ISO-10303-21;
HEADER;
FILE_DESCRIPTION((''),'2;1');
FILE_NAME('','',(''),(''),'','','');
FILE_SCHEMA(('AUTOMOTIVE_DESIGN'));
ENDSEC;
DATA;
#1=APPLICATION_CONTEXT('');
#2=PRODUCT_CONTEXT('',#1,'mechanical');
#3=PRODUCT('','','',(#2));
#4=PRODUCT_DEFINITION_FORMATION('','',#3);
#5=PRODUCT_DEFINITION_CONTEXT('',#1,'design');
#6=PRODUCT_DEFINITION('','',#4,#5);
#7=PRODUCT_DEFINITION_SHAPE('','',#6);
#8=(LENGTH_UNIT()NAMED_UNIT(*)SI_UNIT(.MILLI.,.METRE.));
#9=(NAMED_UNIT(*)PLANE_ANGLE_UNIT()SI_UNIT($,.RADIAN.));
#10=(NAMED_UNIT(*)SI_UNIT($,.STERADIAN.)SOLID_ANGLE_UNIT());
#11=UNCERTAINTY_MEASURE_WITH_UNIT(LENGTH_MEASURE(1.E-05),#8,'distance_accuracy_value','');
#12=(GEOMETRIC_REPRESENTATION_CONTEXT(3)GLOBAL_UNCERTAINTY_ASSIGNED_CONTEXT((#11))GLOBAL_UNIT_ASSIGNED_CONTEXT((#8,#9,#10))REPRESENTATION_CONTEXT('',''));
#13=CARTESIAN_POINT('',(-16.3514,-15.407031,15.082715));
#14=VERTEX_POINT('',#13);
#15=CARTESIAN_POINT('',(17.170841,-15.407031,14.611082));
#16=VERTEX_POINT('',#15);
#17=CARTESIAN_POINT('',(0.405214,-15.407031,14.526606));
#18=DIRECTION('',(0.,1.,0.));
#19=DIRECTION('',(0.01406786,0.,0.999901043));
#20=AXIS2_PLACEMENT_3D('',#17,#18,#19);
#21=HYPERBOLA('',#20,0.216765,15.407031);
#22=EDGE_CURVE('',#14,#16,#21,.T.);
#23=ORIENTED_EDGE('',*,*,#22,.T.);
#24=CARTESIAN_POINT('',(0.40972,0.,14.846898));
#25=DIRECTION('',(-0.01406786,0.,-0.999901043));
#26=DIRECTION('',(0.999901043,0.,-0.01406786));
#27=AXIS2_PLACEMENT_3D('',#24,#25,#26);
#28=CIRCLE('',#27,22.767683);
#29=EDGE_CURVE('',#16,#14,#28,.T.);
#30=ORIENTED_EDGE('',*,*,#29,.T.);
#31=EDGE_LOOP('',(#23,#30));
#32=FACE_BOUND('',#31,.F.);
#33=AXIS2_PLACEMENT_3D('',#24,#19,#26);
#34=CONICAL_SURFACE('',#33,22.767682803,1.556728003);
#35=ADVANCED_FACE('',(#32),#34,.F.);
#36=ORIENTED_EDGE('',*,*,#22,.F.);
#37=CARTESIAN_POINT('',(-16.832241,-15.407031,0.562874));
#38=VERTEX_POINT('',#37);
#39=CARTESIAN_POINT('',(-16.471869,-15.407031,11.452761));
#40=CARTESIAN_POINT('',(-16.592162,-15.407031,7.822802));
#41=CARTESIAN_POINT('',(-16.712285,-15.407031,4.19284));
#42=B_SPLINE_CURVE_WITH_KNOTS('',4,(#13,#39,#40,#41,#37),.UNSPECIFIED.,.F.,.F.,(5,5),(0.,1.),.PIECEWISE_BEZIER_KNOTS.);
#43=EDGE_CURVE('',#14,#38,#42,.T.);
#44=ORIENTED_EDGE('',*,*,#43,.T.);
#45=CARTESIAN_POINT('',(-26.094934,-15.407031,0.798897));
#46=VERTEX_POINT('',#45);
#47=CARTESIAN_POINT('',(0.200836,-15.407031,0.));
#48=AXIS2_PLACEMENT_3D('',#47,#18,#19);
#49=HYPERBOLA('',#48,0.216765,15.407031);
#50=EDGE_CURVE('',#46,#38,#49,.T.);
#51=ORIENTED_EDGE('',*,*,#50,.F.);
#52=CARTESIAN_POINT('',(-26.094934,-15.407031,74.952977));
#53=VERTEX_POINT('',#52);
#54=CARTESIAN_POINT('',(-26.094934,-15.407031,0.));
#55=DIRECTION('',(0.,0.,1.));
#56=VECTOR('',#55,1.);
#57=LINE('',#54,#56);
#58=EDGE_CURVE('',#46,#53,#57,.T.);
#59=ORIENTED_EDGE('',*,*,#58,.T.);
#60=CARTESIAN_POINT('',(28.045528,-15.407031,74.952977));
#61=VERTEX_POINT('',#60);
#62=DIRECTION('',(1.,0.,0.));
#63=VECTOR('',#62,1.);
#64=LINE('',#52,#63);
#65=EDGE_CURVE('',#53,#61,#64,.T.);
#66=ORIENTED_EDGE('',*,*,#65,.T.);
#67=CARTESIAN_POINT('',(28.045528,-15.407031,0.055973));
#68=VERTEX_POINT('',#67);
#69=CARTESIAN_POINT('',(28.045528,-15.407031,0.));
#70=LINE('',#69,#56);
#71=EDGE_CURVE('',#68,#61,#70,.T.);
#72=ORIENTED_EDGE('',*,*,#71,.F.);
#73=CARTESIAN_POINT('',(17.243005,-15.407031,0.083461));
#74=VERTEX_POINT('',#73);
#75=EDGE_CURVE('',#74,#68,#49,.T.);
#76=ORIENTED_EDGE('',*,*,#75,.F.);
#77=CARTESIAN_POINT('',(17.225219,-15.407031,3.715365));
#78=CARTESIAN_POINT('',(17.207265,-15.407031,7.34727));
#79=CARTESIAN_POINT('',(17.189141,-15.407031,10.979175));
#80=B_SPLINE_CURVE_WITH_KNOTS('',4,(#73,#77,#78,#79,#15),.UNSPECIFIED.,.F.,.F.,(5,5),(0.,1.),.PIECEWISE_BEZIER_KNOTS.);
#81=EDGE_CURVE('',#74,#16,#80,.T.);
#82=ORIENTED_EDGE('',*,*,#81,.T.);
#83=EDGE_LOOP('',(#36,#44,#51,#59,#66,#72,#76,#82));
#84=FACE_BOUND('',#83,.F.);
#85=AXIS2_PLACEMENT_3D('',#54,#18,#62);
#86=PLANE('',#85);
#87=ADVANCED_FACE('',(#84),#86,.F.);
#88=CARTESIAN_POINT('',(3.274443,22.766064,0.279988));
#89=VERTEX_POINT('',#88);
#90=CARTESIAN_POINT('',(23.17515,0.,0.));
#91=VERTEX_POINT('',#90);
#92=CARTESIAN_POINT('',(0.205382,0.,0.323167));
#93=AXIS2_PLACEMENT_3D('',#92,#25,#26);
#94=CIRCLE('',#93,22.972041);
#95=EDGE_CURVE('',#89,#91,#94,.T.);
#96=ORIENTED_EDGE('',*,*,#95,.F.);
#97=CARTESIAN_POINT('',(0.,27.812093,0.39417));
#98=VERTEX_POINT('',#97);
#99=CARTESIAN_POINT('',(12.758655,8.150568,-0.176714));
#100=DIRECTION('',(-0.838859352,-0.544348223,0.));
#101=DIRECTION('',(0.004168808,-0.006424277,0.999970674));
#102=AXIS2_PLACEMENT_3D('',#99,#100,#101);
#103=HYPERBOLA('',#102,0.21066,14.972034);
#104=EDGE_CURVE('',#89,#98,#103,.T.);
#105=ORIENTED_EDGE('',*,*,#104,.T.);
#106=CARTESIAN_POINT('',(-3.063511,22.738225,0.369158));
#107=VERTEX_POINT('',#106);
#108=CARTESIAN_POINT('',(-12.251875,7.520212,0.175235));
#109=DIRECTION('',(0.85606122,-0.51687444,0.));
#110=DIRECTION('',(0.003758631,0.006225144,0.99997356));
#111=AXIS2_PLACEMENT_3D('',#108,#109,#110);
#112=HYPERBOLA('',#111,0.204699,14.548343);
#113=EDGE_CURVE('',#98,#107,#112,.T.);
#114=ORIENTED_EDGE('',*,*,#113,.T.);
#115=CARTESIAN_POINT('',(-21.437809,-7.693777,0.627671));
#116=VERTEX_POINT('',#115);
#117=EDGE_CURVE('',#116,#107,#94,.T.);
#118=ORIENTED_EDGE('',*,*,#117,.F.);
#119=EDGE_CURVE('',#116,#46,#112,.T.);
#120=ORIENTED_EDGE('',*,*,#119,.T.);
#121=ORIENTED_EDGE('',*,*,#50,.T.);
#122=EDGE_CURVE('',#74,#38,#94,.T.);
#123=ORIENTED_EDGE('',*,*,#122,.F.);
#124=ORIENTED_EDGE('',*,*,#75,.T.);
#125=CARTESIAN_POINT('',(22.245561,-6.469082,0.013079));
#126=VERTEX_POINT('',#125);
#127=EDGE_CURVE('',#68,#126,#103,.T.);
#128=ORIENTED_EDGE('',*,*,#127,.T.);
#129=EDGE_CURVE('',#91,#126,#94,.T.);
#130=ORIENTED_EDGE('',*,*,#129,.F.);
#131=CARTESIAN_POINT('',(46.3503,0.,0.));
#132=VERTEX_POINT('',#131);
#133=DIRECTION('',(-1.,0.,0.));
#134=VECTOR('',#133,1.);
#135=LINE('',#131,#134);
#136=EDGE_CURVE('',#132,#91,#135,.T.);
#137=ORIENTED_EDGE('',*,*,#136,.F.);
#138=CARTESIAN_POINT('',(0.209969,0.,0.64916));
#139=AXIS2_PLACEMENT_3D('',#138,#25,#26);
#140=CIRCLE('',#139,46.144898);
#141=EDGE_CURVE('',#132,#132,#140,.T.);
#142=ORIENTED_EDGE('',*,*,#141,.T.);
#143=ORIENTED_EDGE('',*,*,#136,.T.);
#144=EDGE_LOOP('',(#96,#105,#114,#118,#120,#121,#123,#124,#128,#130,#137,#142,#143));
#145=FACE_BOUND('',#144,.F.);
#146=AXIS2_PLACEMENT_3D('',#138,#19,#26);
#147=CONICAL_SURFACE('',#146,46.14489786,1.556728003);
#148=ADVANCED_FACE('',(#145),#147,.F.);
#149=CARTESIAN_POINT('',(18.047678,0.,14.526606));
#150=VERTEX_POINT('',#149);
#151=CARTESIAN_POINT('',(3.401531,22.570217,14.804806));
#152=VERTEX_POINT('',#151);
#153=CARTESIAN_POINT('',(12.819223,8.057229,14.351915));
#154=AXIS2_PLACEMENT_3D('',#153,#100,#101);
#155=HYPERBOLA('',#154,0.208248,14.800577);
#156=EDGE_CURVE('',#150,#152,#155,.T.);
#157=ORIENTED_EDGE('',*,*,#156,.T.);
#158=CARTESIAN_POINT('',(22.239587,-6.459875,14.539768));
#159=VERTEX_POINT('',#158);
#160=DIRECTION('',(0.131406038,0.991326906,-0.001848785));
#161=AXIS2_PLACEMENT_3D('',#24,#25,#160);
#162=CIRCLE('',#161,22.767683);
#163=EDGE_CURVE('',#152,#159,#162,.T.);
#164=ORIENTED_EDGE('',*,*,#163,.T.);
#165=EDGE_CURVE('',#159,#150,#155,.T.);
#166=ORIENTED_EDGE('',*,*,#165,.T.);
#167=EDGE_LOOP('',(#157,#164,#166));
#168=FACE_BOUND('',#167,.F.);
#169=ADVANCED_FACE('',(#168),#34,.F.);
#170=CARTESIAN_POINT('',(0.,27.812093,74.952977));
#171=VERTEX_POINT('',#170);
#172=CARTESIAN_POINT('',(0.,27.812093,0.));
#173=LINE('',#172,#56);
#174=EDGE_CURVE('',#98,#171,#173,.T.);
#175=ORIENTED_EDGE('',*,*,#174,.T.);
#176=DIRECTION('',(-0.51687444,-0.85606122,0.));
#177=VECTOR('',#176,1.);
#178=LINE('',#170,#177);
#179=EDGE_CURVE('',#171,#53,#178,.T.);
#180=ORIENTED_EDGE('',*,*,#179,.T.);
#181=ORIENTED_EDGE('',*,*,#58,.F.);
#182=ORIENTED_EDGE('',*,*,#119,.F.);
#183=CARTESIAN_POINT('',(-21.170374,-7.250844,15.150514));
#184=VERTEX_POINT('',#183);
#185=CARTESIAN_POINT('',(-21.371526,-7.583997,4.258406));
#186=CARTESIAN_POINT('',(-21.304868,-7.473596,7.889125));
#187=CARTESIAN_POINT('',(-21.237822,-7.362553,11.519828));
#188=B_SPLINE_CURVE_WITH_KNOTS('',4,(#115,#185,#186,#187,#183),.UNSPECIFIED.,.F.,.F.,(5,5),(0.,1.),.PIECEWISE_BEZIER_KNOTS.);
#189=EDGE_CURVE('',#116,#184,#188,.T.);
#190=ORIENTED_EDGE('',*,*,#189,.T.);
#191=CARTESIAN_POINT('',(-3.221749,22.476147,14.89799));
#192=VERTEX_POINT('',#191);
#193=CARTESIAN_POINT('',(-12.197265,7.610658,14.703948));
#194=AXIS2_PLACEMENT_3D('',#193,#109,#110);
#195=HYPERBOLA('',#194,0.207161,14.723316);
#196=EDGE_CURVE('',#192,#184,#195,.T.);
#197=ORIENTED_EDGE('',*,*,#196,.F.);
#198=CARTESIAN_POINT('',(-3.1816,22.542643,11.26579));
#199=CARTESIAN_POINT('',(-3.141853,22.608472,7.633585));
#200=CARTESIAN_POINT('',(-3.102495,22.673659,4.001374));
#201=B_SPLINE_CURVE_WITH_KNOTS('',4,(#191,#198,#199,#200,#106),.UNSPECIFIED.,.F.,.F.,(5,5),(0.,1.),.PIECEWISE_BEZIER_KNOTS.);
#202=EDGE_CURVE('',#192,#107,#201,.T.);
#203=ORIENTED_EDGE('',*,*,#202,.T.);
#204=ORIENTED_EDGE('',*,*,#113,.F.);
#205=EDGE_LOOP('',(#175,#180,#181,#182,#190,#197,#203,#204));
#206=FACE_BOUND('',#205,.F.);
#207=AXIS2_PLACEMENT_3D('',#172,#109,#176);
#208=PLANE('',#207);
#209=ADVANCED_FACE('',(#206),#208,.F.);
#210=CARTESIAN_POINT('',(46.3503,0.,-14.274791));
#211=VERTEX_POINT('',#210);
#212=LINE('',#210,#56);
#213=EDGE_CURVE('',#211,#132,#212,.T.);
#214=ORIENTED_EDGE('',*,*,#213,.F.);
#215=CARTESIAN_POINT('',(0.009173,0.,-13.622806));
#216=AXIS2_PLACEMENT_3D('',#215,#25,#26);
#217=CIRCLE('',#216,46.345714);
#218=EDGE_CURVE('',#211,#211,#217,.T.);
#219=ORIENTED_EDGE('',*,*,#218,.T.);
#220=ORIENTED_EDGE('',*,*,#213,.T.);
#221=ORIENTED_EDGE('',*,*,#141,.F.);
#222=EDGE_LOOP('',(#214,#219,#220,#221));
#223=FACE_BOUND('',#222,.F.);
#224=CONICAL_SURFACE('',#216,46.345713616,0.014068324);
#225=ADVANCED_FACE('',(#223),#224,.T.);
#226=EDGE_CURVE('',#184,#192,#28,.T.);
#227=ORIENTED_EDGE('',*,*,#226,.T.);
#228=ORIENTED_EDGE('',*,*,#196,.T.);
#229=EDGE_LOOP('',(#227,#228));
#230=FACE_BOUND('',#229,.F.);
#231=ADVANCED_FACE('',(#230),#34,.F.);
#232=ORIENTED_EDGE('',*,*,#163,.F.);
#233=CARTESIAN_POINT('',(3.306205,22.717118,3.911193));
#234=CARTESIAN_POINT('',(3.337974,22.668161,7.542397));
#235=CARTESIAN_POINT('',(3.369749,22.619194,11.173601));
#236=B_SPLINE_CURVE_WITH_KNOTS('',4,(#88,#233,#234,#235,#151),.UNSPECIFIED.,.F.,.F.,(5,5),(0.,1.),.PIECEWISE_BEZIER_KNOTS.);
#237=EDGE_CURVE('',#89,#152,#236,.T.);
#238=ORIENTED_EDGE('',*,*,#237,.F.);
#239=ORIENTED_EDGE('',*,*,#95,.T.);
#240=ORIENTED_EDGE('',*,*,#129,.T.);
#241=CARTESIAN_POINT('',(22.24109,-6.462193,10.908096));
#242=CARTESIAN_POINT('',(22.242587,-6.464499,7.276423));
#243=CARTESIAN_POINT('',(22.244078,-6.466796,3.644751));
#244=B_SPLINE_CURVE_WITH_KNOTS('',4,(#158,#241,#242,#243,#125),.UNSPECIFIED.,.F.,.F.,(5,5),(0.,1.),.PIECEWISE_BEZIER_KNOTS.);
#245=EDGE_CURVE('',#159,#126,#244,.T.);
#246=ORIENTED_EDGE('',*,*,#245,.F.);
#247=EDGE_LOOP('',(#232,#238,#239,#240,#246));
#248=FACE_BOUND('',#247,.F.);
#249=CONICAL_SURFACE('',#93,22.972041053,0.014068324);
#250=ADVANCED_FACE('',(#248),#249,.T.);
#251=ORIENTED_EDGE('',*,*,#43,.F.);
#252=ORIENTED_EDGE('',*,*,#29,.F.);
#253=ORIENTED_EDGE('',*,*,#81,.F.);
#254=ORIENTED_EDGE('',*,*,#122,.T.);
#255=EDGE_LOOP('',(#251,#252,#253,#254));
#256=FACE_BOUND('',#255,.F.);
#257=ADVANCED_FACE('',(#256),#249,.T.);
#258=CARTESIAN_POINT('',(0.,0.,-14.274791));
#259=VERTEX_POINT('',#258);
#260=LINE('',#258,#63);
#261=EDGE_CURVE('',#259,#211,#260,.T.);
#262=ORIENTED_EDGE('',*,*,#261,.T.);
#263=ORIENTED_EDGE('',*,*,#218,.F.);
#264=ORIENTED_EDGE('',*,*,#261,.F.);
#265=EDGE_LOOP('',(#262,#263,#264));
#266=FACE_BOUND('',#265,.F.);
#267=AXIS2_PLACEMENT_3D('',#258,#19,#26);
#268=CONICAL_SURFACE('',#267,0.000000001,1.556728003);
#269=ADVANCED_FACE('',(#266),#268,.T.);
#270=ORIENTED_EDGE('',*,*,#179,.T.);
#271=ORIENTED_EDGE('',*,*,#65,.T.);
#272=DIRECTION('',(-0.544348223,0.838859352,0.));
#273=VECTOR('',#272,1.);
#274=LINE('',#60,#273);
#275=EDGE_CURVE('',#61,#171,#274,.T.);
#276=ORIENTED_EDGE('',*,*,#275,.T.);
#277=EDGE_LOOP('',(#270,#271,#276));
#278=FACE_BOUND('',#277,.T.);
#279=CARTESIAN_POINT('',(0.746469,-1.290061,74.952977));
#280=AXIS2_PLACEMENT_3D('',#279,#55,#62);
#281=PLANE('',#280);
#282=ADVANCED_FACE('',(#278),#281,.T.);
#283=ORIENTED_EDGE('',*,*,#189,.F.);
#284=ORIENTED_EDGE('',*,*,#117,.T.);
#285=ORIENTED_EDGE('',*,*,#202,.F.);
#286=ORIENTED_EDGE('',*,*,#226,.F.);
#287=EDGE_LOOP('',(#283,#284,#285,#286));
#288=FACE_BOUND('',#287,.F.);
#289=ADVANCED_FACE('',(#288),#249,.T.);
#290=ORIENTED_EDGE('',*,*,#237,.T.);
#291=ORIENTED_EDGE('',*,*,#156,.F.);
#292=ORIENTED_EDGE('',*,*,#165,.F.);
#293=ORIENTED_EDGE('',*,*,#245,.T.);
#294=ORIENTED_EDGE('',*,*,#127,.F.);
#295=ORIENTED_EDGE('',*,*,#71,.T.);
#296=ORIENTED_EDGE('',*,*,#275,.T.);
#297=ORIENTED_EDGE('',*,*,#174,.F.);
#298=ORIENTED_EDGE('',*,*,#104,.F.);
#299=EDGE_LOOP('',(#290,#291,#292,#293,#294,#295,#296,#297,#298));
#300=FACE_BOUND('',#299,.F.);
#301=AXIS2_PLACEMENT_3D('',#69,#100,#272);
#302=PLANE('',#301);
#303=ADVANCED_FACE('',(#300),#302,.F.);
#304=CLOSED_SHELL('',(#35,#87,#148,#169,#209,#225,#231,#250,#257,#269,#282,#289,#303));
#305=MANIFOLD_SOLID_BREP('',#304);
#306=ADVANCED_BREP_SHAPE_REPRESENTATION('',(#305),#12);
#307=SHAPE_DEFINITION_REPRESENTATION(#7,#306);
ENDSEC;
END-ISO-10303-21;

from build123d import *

# Parameters (mm, degrees)
F3_DEPTH = 74.9529767781


with BuildPart() as f1:
    # F0 (on Front) → F1 (revolve)
    with BuildSketch(Plane.XZ):
        Polygon((0.4052141029, 14.5266056061), (0.2008356291, 0), (23.175150156, 0), (23.175150156, 14.5266056061), (11.587575078, 14.5266056061), align=None)
        Polygon((0.2008356291, 0), (0, -14.2747908831), (46.350300312, -14.2747908831), (46.350300312, 0), (23.175150156, 0), align=None)
        Polygon((0.9806752205, 55.4286465049), (0.4052141029, 14.5266056061), (11.587575078, 14.5266056061), (11.9791924953, 55.4286465049), align=None)
    revolve(axis=Axis((0.4903376102, 0, 20.5769278109), (-0.0140678597, 0, -0.9999010428)))

    # F2 (on Top) → F3 (join)
    with BuildSketch(Plane.XY):
        Polygon((-26.0949339381, -15.407031402), (28.0455284658, -15.407031402), (0, 27.8120934963), align=None)
    extrude(amount=F3_DEPTH)


solid = f1.part
